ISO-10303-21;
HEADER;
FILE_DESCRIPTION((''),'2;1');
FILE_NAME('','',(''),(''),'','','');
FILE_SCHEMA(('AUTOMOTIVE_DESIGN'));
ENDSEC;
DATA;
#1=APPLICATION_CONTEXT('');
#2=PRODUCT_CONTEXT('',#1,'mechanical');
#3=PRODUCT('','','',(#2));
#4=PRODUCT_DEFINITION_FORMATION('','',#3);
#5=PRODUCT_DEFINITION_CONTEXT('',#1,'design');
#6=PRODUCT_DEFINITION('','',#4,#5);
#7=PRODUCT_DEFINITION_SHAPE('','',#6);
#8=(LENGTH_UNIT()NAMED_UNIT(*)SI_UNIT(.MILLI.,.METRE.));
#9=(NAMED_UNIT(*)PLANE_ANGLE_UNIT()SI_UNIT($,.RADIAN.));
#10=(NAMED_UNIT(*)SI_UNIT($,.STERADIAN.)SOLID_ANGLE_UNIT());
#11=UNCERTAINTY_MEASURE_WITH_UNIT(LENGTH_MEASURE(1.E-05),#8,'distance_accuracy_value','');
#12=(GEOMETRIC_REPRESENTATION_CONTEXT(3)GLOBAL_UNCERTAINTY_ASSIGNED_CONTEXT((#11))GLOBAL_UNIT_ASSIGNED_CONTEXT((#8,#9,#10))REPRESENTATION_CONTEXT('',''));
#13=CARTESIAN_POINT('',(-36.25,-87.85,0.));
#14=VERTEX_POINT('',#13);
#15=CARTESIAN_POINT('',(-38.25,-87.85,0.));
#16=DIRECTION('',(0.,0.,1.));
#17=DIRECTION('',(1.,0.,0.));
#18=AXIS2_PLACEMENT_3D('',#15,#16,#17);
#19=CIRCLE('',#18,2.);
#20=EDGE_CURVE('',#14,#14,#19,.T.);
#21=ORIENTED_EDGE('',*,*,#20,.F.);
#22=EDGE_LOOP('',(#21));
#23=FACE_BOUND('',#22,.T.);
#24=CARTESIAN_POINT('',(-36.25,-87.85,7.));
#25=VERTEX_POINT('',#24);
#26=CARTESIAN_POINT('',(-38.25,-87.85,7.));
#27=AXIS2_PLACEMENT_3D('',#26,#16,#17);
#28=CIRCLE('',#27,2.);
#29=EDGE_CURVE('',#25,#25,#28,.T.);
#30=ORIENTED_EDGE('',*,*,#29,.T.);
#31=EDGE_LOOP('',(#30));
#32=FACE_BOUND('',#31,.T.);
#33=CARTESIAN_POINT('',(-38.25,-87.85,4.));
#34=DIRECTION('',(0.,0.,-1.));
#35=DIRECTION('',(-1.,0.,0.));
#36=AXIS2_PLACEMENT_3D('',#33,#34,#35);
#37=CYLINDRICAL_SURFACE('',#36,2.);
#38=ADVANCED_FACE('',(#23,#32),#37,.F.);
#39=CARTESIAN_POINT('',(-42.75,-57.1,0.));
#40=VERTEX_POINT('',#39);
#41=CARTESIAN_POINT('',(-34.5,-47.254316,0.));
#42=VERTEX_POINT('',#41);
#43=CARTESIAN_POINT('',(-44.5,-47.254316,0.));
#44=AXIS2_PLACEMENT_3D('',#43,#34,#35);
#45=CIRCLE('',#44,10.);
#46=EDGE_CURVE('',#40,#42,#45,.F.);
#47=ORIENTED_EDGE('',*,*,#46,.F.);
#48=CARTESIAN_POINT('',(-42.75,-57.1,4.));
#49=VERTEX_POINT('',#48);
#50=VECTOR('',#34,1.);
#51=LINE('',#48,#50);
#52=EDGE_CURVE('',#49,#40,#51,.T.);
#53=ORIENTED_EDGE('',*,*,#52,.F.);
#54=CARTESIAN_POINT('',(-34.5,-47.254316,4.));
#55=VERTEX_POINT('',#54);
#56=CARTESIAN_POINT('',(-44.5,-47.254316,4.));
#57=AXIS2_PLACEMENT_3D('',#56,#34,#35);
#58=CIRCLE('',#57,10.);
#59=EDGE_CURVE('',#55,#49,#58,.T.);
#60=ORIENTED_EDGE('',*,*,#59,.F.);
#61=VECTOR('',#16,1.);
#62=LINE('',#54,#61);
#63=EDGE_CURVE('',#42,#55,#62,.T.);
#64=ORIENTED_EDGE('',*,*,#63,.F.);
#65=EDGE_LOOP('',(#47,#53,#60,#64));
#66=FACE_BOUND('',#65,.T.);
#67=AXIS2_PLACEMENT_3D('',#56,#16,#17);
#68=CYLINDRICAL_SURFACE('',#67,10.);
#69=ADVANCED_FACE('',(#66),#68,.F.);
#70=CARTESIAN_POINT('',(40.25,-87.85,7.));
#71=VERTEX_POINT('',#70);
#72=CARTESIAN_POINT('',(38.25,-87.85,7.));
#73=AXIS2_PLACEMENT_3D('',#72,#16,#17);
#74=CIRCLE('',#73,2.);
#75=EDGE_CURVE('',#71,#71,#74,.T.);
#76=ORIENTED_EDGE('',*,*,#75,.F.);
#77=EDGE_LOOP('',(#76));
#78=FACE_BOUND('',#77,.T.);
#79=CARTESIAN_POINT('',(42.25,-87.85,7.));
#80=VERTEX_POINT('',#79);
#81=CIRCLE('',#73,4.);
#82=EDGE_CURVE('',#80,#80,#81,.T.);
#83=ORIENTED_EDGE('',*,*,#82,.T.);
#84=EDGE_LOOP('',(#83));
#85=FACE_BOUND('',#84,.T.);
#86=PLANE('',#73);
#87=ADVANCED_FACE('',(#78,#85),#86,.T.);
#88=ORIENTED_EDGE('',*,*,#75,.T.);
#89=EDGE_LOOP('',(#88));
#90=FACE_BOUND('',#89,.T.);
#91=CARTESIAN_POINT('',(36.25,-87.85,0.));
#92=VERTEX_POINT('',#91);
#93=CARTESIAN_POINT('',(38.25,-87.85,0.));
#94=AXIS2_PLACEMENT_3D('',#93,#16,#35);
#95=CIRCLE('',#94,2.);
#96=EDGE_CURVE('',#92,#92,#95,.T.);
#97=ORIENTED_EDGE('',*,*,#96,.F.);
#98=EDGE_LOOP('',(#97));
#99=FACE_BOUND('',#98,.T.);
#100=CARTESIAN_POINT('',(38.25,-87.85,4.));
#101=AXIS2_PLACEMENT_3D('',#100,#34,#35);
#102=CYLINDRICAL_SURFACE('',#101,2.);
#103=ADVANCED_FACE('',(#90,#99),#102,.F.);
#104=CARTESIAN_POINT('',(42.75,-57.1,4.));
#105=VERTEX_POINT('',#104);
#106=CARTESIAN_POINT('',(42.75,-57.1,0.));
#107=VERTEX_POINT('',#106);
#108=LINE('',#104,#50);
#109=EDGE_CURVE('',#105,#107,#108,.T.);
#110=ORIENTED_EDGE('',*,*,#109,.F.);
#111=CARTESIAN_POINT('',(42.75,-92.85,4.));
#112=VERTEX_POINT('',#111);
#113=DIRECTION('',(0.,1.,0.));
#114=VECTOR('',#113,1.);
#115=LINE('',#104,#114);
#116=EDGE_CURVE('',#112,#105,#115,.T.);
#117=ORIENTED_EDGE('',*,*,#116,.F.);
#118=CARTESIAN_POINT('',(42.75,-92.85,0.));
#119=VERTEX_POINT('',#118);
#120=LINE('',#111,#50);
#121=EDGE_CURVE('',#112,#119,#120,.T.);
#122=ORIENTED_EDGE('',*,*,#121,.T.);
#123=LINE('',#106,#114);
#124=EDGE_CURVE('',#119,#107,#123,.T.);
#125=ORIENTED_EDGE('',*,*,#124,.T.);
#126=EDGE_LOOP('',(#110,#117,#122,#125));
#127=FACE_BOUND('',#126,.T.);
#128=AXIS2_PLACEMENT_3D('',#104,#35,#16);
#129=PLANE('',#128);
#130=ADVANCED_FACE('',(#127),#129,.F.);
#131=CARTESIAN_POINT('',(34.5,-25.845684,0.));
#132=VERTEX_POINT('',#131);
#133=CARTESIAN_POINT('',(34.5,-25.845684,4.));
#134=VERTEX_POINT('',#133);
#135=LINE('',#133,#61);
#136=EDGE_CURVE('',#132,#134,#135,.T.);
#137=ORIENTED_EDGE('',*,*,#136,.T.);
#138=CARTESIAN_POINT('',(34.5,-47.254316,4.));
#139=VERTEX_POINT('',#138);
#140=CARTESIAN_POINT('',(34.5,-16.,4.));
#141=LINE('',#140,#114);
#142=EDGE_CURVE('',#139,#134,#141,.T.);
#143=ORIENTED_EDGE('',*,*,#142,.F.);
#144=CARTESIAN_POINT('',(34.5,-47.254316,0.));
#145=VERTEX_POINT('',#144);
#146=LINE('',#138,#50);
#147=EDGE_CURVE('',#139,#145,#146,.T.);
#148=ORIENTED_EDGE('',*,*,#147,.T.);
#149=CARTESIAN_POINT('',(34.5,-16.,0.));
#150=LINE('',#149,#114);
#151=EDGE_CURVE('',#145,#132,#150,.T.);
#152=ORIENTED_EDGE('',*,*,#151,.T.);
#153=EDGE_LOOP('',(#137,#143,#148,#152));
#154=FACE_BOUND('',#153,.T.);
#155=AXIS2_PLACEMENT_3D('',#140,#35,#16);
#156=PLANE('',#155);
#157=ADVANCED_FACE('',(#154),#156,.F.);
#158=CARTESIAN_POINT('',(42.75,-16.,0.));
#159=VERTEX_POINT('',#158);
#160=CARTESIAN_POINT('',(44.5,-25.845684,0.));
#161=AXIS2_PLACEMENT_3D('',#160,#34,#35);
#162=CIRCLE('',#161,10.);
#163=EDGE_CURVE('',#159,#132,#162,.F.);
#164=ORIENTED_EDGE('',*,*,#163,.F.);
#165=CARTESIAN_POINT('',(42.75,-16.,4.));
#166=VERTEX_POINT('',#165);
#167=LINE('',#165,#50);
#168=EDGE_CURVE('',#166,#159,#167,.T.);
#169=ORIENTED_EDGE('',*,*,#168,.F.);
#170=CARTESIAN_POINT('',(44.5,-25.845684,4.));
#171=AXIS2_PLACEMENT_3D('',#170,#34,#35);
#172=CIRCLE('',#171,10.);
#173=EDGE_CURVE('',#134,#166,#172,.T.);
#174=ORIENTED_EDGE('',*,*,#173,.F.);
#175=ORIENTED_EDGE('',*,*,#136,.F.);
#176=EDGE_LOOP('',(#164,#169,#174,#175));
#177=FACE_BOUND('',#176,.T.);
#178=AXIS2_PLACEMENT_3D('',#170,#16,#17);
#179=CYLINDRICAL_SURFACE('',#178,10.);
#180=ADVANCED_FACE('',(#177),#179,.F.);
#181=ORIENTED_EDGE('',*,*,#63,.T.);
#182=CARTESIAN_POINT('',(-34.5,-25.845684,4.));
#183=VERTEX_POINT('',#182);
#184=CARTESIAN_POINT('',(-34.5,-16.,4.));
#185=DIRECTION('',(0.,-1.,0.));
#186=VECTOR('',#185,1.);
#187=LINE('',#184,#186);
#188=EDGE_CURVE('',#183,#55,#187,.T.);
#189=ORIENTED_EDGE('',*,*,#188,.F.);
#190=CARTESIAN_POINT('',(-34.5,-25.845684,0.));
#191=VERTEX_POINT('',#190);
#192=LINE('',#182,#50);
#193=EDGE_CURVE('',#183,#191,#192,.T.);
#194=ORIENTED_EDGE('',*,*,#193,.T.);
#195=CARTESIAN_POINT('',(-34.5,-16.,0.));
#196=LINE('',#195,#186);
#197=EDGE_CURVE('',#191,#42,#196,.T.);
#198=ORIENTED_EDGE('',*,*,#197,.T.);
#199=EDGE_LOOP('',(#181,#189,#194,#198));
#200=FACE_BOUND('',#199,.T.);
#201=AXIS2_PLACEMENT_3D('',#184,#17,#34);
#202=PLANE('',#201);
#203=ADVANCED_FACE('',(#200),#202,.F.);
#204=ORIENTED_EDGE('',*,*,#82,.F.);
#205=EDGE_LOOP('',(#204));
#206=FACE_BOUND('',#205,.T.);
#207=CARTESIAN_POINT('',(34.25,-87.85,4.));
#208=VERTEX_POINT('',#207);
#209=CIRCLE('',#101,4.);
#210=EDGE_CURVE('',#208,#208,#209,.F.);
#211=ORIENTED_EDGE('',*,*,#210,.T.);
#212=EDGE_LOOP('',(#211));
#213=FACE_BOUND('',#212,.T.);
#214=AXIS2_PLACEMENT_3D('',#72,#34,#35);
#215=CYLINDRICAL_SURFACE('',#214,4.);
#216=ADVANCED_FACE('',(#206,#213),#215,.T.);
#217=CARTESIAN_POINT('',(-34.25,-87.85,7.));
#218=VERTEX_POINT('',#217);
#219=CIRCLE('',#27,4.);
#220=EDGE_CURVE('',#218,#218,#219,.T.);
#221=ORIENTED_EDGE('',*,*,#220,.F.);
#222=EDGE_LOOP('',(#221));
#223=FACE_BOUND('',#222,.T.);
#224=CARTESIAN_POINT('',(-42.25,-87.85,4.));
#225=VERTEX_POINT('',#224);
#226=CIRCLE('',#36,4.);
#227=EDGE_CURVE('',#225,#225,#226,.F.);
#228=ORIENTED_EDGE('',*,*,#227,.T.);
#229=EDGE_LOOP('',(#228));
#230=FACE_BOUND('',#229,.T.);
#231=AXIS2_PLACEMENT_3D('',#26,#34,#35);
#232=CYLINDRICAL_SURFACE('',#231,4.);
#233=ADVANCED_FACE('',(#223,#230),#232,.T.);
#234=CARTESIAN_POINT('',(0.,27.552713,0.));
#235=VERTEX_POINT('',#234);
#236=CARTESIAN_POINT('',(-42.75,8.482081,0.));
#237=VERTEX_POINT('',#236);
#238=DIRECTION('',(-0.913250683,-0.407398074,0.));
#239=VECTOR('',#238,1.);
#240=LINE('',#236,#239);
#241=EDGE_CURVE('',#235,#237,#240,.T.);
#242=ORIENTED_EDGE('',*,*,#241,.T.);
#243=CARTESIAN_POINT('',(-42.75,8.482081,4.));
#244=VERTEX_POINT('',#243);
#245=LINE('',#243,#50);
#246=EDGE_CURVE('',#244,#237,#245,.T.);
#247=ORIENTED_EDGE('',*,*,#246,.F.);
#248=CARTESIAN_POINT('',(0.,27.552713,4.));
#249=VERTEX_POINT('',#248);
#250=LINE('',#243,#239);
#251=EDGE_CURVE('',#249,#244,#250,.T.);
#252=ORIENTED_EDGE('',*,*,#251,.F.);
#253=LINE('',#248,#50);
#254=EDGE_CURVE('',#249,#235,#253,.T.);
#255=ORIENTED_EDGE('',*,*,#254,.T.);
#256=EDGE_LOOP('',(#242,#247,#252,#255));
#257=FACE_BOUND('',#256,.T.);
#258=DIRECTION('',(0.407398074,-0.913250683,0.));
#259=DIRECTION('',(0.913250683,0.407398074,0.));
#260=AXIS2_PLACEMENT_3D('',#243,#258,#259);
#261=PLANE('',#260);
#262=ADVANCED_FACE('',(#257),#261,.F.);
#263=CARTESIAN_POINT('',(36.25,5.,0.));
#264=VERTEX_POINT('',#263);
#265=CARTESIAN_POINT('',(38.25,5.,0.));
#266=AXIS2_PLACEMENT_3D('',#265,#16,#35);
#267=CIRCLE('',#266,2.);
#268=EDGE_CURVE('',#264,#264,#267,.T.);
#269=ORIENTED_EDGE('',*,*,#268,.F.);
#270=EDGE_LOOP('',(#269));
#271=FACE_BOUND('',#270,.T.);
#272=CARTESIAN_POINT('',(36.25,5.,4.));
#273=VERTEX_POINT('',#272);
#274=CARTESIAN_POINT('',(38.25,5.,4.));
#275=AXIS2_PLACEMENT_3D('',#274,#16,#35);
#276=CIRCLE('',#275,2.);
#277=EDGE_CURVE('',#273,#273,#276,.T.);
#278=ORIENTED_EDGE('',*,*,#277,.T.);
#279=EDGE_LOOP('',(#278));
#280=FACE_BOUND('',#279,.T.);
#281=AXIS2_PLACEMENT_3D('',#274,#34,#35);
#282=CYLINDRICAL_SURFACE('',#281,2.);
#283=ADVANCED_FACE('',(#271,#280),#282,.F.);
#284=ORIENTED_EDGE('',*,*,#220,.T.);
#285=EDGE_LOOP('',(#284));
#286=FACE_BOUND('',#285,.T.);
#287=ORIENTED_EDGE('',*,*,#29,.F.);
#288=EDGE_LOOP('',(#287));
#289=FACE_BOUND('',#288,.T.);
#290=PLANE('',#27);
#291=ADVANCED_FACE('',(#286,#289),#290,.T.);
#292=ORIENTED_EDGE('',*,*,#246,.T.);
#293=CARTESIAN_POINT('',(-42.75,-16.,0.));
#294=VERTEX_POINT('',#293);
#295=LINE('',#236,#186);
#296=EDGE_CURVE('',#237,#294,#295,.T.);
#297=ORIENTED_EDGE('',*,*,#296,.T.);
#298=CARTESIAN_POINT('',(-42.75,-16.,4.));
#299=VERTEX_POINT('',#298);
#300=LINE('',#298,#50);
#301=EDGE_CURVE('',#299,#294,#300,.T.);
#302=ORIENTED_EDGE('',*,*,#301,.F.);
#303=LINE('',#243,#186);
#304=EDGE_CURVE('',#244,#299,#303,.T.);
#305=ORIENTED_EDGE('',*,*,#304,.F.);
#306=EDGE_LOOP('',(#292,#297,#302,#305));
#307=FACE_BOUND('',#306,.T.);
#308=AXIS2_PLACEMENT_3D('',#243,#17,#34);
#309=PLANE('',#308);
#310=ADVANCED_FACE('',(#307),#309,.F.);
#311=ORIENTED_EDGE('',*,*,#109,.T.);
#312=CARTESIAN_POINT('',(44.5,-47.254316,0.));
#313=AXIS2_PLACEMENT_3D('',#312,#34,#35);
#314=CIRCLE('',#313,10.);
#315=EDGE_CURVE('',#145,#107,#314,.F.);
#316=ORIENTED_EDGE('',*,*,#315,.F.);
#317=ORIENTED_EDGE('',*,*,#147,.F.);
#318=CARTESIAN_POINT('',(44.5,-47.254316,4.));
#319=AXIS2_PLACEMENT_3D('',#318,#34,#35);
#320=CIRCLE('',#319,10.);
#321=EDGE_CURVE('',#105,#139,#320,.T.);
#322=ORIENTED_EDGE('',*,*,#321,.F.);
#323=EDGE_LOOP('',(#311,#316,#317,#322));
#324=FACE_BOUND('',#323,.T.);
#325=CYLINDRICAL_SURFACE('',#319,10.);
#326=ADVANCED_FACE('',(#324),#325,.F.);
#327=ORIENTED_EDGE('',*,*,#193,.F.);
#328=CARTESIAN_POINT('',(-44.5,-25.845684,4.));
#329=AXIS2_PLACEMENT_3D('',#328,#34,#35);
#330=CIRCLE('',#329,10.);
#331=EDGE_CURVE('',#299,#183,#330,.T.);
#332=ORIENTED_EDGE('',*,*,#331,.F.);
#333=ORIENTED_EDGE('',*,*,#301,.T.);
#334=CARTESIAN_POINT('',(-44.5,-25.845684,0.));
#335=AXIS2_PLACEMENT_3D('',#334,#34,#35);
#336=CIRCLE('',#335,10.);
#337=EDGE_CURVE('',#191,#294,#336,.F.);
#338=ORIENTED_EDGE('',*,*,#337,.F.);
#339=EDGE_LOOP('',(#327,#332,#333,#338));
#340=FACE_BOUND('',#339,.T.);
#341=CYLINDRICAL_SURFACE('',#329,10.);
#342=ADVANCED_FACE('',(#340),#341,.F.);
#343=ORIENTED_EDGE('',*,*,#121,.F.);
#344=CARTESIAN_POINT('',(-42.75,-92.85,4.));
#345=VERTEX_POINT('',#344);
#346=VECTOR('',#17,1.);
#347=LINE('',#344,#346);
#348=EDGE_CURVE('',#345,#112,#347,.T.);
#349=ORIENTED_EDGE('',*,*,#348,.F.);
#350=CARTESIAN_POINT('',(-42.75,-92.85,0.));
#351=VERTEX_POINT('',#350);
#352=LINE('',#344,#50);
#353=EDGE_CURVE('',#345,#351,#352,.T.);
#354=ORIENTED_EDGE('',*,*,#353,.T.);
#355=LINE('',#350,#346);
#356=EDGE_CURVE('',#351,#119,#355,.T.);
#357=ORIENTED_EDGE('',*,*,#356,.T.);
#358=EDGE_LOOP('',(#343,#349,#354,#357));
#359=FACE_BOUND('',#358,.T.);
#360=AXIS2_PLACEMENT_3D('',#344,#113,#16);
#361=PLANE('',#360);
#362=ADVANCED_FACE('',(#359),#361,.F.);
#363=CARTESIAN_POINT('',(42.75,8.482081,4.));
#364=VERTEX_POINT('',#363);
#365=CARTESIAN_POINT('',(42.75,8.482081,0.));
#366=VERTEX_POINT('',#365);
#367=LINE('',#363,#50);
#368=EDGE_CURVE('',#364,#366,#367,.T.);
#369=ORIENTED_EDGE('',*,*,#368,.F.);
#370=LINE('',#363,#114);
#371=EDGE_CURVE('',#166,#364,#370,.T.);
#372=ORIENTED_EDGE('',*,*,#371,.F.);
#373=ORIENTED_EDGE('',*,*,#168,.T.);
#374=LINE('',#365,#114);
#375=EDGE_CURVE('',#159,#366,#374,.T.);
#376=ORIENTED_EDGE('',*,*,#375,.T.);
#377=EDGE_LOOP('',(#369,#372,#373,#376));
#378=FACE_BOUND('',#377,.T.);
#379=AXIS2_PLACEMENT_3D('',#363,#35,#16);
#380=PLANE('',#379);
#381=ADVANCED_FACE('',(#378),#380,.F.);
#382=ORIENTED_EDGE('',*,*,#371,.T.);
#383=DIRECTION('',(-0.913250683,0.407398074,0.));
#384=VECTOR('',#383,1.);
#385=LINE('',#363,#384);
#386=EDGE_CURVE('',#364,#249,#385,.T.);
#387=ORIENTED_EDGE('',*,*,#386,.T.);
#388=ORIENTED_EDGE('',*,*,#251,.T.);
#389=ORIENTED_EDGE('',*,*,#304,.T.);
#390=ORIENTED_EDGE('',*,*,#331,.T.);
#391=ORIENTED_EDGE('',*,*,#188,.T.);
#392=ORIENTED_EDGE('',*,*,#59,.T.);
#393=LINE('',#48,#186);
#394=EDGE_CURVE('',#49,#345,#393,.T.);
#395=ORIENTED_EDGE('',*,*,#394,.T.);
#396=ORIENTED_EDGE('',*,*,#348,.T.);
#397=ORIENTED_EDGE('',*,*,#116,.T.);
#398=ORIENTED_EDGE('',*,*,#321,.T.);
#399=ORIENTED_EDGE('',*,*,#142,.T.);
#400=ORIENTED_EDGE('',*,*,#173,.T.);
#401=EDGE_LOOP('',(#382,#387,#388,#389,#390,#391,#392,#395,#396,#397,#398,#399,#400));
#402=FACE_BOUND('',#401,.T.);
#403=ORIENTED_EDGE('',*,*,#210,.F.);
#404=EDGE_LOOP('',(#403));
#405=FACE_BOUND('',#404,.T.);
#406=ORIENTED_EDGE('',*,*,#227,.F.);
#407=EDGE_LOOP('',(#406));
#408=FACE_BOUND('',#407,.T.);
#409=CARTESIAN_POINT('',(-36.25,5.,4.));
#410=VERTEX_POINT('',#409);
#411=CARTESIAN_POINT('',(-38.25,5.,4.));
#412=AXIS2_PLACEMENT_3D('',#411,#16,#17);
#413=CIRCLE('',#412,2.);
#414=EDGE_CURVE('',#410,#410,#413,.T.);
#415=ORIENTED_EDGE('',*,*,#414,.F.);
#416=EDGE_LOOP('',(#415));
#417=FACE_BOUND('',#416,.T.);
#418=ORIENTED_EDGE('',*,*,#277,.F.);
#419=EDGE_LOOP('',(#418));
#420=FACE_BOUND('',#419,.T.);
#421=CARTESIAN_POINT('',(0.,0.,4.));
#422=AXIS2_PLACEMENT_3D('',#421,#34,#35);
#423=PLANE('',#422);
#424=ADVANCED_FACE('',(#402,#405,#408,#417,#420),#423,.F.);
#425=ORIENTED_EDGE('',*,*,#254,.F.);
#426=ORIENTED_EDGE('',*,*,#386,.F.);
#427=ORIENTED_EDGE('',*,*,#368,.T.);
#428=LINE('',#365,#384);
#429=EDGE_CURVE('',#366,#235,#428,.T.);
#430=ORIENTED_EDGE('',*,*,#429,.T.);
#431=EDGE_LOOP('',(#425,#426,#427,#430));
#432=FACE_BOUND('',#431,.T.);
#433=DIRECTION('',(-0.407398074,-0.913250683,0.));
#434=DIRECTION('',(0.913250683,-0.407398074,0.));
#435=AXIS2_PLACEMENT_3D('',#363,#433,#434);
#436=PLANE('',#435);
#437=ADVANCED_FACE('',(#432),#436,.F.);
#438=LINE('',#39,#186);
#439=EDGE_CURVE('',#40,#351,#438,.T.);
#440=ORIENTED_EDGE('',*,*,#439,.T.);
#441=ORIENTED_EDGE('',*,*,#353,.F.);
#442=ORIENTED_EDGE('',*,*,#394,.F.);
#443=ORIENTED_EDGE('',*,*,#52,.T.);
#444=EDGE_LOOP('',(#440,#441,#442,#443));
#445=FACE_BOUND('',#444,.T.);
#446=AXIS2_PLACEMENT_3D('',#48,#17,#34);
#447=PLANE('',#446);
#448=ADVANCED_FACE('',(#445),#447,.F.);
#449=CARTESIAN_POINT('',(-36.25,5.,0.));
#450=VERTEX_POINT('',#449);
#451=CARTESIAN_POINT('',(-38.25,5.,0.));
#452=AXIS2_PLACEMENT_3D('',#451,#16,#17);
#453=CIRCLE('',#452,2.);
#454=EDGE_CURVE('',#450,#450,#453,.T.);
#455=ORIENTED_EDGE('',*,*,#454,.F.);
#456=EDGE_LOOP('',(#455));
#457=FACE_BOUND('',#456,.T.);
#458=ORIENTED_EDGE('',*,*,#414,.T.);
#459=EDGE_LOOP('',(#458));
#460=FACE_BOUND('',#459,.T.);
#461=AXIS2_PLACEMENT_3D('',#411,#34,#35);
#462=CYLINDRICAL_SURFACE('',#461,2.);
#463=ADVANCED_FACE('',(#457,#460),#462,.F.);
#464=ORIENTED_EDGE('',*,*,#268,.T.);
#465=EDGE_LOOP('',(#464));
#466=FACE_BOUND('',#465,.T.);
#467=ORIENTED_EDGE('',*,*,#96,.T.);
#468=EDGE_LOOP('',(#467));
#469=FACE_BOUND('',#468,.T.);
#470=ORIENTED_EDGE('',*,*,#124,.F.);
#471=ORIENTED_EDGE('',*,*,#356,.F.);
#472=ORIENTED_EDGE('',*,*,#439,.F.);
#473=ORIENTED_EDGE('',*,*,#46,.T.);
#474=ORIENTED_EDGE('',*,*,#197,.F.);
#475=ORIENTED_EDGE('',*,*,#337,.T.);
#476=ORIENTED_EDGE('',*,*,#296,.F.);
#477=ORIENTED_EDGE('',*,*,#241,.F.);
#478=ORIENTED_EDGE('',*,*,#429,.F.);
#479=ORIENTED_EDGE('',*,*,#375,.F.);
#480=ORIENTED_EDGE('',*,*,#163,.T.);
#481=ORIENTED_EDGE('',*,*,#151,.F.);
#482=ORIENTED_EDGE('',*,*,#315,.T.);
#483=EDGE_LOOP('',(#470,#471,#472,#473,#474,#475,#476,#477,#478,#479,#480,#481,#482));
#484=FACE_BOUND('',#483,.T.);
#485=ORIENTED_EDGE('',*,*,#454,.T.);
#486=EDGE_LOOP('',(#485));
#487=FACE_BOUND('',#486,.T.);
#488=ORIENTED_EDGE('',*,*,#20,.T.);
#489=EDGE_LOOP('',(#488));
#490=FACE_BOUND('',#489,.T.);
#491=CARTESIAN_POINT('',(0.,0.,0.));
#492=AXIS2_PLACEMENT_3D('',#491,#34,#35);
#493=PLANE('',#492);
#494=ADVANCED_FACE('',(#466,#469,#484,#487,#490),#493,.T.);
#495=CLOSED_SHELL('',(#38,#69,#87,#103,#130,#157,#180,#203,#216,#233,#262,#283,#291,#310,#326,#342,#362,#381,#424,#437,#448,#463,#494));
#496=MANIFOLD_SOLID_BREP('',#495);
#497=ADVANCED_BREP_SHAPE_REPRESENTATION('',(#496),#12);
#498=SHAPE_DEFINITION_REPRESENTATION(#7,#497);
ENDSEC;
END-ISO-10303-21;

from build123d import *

# Parameters (mm, degrees)
SKETCH3_R           = 2
BOSS_EXTRUDE1_DEPTH = 4
FILLET1_R           = 10
SKETCH4_R           = 4
SKETCH4_R_2         = 2
BOSS_EXTRUDE2_DEPTH = 3


with BuildPart() as part:
    # Sketch3 → Boss-Extrude1 (new body)
    with BuildSketch(Plane.XY):
        Polygon((-42.75, 8.482081222), (-42.75, -16), (-34.5, -16), (-34.5, -57.1), (-42.75, -57.1), (-42.75, -92.85), (42.75, -92.85), (42.75, -57.1), (34.5, -57.1), (34.5, -16), (42.75, -16), (42.75, 8.482081222), (0, 27.552713192), align=None)
        with Locations((-38.25, 5)):
            Circle(SKETCH3_R, mode=Mode.SUBTRACT)
        with Locations((-38.25, -87.85)):
            Circle(SKETCH3_R, mode=Mode.SUBTRACT)
        with Locations(Location((38.25, -87.85, 0), (0, 0, 180))):
            Circle(SKETCH3_R, mode=Mode.SUBTRACT)
        with Locations(Location((38.25, 5, 0), (0, 0, 180))):
            Circle(SKETCH3_R, mode=Mode.SUBTRACT)
    extrude(amount=BOSS_EXTRUDE1_DEPTH)

    # Fillet1
    # the kernel refuses this fillet: 10 mm, written as the material it adds along each edge
    with BuildSketch(Plane(origin=(34.5, -57.1, 0), x_dir=(1, 0, 0), z_dir=(0, 0, 1)), Plane(origin=(-34.5, -16, 0), x_dir=(-1, 0, 0), z_dir=(0, 0, 1))) as fillet1_piece_1:
        with BuildLine():
            CenterArc((10, 9.845684334), FILLET1_R, 180, 79.921341892)
            Line((0, 9.845684334), (-0.2, 9.845684334))
            Line((-0.2, 9.845684334), (-0.2, 0))
            Line((-0.2, 0), (0, -0.2))
            ThreePointArc((0, -0.2), (4.125, -0.2), (8.215, -0.196913687))
            Line((8.215, -0.196913687), (8.25, 0))
        make_face()
    extrude(amount=4)
    with BuildSketch(Plane(origin=(34.5, -16, 0), x_dir=(0, -1, 0), z_dir=(0, 0, 1)), Plane(origin=(-34.5, -57.1, 0), x_dir=(0, 1, 0), z_dir=(0, 0, 1))) as fillet1_piece_2:
        with BuildLine():
            CenterArc((9.845684334, 10), FILLET1_R, 190.078658108, 79.921341892)
            Line((0, 8.25), (-0.196913687, 8.215))
            ThreePointArc((-0.196913687, 8.215), (-0.2, 4.125), (-0.2, 0))
            Line((-0.2, 0), (0, -0.2))
            Line((0, -0.2), (9.845684334, -0.2))
            Line((9.845684334, -0.2), (9.845684334, 0))
        make_face()
    extrude(amount=4)

    # Sketch4 → Boss-Extrude2 (add)
    # profile 1 of 2: a face of its own
    with BuildSketch(Plane.XY.offset(4)):
        with Locations(Location((38.25, -87.85, 0), (0, 0, 180))):
            Circle(SKETCH4_R)
        with Locations(Location((38.25, -87.85, 0), (0, 0, 180))):
            Circle(SKETCH4_R_2, mode=Mode.SUBTRACT)
    # profile 2 of 2: a face of its own
    with BuildSketch(Plane.XY.offset(4)):
        with Locations(Location((-38.25, -87.85, 0), (0, 0, 180))):
            Circle(SKETCH4_R)
        with Locations((-38.25, -87.85)):
            Circle(SKETCH4_R_2, mode=Mode.SUBTRACT)
    extrude(amount=BOSS_EXTRUDE2_DEPTH)


solid = part.part
